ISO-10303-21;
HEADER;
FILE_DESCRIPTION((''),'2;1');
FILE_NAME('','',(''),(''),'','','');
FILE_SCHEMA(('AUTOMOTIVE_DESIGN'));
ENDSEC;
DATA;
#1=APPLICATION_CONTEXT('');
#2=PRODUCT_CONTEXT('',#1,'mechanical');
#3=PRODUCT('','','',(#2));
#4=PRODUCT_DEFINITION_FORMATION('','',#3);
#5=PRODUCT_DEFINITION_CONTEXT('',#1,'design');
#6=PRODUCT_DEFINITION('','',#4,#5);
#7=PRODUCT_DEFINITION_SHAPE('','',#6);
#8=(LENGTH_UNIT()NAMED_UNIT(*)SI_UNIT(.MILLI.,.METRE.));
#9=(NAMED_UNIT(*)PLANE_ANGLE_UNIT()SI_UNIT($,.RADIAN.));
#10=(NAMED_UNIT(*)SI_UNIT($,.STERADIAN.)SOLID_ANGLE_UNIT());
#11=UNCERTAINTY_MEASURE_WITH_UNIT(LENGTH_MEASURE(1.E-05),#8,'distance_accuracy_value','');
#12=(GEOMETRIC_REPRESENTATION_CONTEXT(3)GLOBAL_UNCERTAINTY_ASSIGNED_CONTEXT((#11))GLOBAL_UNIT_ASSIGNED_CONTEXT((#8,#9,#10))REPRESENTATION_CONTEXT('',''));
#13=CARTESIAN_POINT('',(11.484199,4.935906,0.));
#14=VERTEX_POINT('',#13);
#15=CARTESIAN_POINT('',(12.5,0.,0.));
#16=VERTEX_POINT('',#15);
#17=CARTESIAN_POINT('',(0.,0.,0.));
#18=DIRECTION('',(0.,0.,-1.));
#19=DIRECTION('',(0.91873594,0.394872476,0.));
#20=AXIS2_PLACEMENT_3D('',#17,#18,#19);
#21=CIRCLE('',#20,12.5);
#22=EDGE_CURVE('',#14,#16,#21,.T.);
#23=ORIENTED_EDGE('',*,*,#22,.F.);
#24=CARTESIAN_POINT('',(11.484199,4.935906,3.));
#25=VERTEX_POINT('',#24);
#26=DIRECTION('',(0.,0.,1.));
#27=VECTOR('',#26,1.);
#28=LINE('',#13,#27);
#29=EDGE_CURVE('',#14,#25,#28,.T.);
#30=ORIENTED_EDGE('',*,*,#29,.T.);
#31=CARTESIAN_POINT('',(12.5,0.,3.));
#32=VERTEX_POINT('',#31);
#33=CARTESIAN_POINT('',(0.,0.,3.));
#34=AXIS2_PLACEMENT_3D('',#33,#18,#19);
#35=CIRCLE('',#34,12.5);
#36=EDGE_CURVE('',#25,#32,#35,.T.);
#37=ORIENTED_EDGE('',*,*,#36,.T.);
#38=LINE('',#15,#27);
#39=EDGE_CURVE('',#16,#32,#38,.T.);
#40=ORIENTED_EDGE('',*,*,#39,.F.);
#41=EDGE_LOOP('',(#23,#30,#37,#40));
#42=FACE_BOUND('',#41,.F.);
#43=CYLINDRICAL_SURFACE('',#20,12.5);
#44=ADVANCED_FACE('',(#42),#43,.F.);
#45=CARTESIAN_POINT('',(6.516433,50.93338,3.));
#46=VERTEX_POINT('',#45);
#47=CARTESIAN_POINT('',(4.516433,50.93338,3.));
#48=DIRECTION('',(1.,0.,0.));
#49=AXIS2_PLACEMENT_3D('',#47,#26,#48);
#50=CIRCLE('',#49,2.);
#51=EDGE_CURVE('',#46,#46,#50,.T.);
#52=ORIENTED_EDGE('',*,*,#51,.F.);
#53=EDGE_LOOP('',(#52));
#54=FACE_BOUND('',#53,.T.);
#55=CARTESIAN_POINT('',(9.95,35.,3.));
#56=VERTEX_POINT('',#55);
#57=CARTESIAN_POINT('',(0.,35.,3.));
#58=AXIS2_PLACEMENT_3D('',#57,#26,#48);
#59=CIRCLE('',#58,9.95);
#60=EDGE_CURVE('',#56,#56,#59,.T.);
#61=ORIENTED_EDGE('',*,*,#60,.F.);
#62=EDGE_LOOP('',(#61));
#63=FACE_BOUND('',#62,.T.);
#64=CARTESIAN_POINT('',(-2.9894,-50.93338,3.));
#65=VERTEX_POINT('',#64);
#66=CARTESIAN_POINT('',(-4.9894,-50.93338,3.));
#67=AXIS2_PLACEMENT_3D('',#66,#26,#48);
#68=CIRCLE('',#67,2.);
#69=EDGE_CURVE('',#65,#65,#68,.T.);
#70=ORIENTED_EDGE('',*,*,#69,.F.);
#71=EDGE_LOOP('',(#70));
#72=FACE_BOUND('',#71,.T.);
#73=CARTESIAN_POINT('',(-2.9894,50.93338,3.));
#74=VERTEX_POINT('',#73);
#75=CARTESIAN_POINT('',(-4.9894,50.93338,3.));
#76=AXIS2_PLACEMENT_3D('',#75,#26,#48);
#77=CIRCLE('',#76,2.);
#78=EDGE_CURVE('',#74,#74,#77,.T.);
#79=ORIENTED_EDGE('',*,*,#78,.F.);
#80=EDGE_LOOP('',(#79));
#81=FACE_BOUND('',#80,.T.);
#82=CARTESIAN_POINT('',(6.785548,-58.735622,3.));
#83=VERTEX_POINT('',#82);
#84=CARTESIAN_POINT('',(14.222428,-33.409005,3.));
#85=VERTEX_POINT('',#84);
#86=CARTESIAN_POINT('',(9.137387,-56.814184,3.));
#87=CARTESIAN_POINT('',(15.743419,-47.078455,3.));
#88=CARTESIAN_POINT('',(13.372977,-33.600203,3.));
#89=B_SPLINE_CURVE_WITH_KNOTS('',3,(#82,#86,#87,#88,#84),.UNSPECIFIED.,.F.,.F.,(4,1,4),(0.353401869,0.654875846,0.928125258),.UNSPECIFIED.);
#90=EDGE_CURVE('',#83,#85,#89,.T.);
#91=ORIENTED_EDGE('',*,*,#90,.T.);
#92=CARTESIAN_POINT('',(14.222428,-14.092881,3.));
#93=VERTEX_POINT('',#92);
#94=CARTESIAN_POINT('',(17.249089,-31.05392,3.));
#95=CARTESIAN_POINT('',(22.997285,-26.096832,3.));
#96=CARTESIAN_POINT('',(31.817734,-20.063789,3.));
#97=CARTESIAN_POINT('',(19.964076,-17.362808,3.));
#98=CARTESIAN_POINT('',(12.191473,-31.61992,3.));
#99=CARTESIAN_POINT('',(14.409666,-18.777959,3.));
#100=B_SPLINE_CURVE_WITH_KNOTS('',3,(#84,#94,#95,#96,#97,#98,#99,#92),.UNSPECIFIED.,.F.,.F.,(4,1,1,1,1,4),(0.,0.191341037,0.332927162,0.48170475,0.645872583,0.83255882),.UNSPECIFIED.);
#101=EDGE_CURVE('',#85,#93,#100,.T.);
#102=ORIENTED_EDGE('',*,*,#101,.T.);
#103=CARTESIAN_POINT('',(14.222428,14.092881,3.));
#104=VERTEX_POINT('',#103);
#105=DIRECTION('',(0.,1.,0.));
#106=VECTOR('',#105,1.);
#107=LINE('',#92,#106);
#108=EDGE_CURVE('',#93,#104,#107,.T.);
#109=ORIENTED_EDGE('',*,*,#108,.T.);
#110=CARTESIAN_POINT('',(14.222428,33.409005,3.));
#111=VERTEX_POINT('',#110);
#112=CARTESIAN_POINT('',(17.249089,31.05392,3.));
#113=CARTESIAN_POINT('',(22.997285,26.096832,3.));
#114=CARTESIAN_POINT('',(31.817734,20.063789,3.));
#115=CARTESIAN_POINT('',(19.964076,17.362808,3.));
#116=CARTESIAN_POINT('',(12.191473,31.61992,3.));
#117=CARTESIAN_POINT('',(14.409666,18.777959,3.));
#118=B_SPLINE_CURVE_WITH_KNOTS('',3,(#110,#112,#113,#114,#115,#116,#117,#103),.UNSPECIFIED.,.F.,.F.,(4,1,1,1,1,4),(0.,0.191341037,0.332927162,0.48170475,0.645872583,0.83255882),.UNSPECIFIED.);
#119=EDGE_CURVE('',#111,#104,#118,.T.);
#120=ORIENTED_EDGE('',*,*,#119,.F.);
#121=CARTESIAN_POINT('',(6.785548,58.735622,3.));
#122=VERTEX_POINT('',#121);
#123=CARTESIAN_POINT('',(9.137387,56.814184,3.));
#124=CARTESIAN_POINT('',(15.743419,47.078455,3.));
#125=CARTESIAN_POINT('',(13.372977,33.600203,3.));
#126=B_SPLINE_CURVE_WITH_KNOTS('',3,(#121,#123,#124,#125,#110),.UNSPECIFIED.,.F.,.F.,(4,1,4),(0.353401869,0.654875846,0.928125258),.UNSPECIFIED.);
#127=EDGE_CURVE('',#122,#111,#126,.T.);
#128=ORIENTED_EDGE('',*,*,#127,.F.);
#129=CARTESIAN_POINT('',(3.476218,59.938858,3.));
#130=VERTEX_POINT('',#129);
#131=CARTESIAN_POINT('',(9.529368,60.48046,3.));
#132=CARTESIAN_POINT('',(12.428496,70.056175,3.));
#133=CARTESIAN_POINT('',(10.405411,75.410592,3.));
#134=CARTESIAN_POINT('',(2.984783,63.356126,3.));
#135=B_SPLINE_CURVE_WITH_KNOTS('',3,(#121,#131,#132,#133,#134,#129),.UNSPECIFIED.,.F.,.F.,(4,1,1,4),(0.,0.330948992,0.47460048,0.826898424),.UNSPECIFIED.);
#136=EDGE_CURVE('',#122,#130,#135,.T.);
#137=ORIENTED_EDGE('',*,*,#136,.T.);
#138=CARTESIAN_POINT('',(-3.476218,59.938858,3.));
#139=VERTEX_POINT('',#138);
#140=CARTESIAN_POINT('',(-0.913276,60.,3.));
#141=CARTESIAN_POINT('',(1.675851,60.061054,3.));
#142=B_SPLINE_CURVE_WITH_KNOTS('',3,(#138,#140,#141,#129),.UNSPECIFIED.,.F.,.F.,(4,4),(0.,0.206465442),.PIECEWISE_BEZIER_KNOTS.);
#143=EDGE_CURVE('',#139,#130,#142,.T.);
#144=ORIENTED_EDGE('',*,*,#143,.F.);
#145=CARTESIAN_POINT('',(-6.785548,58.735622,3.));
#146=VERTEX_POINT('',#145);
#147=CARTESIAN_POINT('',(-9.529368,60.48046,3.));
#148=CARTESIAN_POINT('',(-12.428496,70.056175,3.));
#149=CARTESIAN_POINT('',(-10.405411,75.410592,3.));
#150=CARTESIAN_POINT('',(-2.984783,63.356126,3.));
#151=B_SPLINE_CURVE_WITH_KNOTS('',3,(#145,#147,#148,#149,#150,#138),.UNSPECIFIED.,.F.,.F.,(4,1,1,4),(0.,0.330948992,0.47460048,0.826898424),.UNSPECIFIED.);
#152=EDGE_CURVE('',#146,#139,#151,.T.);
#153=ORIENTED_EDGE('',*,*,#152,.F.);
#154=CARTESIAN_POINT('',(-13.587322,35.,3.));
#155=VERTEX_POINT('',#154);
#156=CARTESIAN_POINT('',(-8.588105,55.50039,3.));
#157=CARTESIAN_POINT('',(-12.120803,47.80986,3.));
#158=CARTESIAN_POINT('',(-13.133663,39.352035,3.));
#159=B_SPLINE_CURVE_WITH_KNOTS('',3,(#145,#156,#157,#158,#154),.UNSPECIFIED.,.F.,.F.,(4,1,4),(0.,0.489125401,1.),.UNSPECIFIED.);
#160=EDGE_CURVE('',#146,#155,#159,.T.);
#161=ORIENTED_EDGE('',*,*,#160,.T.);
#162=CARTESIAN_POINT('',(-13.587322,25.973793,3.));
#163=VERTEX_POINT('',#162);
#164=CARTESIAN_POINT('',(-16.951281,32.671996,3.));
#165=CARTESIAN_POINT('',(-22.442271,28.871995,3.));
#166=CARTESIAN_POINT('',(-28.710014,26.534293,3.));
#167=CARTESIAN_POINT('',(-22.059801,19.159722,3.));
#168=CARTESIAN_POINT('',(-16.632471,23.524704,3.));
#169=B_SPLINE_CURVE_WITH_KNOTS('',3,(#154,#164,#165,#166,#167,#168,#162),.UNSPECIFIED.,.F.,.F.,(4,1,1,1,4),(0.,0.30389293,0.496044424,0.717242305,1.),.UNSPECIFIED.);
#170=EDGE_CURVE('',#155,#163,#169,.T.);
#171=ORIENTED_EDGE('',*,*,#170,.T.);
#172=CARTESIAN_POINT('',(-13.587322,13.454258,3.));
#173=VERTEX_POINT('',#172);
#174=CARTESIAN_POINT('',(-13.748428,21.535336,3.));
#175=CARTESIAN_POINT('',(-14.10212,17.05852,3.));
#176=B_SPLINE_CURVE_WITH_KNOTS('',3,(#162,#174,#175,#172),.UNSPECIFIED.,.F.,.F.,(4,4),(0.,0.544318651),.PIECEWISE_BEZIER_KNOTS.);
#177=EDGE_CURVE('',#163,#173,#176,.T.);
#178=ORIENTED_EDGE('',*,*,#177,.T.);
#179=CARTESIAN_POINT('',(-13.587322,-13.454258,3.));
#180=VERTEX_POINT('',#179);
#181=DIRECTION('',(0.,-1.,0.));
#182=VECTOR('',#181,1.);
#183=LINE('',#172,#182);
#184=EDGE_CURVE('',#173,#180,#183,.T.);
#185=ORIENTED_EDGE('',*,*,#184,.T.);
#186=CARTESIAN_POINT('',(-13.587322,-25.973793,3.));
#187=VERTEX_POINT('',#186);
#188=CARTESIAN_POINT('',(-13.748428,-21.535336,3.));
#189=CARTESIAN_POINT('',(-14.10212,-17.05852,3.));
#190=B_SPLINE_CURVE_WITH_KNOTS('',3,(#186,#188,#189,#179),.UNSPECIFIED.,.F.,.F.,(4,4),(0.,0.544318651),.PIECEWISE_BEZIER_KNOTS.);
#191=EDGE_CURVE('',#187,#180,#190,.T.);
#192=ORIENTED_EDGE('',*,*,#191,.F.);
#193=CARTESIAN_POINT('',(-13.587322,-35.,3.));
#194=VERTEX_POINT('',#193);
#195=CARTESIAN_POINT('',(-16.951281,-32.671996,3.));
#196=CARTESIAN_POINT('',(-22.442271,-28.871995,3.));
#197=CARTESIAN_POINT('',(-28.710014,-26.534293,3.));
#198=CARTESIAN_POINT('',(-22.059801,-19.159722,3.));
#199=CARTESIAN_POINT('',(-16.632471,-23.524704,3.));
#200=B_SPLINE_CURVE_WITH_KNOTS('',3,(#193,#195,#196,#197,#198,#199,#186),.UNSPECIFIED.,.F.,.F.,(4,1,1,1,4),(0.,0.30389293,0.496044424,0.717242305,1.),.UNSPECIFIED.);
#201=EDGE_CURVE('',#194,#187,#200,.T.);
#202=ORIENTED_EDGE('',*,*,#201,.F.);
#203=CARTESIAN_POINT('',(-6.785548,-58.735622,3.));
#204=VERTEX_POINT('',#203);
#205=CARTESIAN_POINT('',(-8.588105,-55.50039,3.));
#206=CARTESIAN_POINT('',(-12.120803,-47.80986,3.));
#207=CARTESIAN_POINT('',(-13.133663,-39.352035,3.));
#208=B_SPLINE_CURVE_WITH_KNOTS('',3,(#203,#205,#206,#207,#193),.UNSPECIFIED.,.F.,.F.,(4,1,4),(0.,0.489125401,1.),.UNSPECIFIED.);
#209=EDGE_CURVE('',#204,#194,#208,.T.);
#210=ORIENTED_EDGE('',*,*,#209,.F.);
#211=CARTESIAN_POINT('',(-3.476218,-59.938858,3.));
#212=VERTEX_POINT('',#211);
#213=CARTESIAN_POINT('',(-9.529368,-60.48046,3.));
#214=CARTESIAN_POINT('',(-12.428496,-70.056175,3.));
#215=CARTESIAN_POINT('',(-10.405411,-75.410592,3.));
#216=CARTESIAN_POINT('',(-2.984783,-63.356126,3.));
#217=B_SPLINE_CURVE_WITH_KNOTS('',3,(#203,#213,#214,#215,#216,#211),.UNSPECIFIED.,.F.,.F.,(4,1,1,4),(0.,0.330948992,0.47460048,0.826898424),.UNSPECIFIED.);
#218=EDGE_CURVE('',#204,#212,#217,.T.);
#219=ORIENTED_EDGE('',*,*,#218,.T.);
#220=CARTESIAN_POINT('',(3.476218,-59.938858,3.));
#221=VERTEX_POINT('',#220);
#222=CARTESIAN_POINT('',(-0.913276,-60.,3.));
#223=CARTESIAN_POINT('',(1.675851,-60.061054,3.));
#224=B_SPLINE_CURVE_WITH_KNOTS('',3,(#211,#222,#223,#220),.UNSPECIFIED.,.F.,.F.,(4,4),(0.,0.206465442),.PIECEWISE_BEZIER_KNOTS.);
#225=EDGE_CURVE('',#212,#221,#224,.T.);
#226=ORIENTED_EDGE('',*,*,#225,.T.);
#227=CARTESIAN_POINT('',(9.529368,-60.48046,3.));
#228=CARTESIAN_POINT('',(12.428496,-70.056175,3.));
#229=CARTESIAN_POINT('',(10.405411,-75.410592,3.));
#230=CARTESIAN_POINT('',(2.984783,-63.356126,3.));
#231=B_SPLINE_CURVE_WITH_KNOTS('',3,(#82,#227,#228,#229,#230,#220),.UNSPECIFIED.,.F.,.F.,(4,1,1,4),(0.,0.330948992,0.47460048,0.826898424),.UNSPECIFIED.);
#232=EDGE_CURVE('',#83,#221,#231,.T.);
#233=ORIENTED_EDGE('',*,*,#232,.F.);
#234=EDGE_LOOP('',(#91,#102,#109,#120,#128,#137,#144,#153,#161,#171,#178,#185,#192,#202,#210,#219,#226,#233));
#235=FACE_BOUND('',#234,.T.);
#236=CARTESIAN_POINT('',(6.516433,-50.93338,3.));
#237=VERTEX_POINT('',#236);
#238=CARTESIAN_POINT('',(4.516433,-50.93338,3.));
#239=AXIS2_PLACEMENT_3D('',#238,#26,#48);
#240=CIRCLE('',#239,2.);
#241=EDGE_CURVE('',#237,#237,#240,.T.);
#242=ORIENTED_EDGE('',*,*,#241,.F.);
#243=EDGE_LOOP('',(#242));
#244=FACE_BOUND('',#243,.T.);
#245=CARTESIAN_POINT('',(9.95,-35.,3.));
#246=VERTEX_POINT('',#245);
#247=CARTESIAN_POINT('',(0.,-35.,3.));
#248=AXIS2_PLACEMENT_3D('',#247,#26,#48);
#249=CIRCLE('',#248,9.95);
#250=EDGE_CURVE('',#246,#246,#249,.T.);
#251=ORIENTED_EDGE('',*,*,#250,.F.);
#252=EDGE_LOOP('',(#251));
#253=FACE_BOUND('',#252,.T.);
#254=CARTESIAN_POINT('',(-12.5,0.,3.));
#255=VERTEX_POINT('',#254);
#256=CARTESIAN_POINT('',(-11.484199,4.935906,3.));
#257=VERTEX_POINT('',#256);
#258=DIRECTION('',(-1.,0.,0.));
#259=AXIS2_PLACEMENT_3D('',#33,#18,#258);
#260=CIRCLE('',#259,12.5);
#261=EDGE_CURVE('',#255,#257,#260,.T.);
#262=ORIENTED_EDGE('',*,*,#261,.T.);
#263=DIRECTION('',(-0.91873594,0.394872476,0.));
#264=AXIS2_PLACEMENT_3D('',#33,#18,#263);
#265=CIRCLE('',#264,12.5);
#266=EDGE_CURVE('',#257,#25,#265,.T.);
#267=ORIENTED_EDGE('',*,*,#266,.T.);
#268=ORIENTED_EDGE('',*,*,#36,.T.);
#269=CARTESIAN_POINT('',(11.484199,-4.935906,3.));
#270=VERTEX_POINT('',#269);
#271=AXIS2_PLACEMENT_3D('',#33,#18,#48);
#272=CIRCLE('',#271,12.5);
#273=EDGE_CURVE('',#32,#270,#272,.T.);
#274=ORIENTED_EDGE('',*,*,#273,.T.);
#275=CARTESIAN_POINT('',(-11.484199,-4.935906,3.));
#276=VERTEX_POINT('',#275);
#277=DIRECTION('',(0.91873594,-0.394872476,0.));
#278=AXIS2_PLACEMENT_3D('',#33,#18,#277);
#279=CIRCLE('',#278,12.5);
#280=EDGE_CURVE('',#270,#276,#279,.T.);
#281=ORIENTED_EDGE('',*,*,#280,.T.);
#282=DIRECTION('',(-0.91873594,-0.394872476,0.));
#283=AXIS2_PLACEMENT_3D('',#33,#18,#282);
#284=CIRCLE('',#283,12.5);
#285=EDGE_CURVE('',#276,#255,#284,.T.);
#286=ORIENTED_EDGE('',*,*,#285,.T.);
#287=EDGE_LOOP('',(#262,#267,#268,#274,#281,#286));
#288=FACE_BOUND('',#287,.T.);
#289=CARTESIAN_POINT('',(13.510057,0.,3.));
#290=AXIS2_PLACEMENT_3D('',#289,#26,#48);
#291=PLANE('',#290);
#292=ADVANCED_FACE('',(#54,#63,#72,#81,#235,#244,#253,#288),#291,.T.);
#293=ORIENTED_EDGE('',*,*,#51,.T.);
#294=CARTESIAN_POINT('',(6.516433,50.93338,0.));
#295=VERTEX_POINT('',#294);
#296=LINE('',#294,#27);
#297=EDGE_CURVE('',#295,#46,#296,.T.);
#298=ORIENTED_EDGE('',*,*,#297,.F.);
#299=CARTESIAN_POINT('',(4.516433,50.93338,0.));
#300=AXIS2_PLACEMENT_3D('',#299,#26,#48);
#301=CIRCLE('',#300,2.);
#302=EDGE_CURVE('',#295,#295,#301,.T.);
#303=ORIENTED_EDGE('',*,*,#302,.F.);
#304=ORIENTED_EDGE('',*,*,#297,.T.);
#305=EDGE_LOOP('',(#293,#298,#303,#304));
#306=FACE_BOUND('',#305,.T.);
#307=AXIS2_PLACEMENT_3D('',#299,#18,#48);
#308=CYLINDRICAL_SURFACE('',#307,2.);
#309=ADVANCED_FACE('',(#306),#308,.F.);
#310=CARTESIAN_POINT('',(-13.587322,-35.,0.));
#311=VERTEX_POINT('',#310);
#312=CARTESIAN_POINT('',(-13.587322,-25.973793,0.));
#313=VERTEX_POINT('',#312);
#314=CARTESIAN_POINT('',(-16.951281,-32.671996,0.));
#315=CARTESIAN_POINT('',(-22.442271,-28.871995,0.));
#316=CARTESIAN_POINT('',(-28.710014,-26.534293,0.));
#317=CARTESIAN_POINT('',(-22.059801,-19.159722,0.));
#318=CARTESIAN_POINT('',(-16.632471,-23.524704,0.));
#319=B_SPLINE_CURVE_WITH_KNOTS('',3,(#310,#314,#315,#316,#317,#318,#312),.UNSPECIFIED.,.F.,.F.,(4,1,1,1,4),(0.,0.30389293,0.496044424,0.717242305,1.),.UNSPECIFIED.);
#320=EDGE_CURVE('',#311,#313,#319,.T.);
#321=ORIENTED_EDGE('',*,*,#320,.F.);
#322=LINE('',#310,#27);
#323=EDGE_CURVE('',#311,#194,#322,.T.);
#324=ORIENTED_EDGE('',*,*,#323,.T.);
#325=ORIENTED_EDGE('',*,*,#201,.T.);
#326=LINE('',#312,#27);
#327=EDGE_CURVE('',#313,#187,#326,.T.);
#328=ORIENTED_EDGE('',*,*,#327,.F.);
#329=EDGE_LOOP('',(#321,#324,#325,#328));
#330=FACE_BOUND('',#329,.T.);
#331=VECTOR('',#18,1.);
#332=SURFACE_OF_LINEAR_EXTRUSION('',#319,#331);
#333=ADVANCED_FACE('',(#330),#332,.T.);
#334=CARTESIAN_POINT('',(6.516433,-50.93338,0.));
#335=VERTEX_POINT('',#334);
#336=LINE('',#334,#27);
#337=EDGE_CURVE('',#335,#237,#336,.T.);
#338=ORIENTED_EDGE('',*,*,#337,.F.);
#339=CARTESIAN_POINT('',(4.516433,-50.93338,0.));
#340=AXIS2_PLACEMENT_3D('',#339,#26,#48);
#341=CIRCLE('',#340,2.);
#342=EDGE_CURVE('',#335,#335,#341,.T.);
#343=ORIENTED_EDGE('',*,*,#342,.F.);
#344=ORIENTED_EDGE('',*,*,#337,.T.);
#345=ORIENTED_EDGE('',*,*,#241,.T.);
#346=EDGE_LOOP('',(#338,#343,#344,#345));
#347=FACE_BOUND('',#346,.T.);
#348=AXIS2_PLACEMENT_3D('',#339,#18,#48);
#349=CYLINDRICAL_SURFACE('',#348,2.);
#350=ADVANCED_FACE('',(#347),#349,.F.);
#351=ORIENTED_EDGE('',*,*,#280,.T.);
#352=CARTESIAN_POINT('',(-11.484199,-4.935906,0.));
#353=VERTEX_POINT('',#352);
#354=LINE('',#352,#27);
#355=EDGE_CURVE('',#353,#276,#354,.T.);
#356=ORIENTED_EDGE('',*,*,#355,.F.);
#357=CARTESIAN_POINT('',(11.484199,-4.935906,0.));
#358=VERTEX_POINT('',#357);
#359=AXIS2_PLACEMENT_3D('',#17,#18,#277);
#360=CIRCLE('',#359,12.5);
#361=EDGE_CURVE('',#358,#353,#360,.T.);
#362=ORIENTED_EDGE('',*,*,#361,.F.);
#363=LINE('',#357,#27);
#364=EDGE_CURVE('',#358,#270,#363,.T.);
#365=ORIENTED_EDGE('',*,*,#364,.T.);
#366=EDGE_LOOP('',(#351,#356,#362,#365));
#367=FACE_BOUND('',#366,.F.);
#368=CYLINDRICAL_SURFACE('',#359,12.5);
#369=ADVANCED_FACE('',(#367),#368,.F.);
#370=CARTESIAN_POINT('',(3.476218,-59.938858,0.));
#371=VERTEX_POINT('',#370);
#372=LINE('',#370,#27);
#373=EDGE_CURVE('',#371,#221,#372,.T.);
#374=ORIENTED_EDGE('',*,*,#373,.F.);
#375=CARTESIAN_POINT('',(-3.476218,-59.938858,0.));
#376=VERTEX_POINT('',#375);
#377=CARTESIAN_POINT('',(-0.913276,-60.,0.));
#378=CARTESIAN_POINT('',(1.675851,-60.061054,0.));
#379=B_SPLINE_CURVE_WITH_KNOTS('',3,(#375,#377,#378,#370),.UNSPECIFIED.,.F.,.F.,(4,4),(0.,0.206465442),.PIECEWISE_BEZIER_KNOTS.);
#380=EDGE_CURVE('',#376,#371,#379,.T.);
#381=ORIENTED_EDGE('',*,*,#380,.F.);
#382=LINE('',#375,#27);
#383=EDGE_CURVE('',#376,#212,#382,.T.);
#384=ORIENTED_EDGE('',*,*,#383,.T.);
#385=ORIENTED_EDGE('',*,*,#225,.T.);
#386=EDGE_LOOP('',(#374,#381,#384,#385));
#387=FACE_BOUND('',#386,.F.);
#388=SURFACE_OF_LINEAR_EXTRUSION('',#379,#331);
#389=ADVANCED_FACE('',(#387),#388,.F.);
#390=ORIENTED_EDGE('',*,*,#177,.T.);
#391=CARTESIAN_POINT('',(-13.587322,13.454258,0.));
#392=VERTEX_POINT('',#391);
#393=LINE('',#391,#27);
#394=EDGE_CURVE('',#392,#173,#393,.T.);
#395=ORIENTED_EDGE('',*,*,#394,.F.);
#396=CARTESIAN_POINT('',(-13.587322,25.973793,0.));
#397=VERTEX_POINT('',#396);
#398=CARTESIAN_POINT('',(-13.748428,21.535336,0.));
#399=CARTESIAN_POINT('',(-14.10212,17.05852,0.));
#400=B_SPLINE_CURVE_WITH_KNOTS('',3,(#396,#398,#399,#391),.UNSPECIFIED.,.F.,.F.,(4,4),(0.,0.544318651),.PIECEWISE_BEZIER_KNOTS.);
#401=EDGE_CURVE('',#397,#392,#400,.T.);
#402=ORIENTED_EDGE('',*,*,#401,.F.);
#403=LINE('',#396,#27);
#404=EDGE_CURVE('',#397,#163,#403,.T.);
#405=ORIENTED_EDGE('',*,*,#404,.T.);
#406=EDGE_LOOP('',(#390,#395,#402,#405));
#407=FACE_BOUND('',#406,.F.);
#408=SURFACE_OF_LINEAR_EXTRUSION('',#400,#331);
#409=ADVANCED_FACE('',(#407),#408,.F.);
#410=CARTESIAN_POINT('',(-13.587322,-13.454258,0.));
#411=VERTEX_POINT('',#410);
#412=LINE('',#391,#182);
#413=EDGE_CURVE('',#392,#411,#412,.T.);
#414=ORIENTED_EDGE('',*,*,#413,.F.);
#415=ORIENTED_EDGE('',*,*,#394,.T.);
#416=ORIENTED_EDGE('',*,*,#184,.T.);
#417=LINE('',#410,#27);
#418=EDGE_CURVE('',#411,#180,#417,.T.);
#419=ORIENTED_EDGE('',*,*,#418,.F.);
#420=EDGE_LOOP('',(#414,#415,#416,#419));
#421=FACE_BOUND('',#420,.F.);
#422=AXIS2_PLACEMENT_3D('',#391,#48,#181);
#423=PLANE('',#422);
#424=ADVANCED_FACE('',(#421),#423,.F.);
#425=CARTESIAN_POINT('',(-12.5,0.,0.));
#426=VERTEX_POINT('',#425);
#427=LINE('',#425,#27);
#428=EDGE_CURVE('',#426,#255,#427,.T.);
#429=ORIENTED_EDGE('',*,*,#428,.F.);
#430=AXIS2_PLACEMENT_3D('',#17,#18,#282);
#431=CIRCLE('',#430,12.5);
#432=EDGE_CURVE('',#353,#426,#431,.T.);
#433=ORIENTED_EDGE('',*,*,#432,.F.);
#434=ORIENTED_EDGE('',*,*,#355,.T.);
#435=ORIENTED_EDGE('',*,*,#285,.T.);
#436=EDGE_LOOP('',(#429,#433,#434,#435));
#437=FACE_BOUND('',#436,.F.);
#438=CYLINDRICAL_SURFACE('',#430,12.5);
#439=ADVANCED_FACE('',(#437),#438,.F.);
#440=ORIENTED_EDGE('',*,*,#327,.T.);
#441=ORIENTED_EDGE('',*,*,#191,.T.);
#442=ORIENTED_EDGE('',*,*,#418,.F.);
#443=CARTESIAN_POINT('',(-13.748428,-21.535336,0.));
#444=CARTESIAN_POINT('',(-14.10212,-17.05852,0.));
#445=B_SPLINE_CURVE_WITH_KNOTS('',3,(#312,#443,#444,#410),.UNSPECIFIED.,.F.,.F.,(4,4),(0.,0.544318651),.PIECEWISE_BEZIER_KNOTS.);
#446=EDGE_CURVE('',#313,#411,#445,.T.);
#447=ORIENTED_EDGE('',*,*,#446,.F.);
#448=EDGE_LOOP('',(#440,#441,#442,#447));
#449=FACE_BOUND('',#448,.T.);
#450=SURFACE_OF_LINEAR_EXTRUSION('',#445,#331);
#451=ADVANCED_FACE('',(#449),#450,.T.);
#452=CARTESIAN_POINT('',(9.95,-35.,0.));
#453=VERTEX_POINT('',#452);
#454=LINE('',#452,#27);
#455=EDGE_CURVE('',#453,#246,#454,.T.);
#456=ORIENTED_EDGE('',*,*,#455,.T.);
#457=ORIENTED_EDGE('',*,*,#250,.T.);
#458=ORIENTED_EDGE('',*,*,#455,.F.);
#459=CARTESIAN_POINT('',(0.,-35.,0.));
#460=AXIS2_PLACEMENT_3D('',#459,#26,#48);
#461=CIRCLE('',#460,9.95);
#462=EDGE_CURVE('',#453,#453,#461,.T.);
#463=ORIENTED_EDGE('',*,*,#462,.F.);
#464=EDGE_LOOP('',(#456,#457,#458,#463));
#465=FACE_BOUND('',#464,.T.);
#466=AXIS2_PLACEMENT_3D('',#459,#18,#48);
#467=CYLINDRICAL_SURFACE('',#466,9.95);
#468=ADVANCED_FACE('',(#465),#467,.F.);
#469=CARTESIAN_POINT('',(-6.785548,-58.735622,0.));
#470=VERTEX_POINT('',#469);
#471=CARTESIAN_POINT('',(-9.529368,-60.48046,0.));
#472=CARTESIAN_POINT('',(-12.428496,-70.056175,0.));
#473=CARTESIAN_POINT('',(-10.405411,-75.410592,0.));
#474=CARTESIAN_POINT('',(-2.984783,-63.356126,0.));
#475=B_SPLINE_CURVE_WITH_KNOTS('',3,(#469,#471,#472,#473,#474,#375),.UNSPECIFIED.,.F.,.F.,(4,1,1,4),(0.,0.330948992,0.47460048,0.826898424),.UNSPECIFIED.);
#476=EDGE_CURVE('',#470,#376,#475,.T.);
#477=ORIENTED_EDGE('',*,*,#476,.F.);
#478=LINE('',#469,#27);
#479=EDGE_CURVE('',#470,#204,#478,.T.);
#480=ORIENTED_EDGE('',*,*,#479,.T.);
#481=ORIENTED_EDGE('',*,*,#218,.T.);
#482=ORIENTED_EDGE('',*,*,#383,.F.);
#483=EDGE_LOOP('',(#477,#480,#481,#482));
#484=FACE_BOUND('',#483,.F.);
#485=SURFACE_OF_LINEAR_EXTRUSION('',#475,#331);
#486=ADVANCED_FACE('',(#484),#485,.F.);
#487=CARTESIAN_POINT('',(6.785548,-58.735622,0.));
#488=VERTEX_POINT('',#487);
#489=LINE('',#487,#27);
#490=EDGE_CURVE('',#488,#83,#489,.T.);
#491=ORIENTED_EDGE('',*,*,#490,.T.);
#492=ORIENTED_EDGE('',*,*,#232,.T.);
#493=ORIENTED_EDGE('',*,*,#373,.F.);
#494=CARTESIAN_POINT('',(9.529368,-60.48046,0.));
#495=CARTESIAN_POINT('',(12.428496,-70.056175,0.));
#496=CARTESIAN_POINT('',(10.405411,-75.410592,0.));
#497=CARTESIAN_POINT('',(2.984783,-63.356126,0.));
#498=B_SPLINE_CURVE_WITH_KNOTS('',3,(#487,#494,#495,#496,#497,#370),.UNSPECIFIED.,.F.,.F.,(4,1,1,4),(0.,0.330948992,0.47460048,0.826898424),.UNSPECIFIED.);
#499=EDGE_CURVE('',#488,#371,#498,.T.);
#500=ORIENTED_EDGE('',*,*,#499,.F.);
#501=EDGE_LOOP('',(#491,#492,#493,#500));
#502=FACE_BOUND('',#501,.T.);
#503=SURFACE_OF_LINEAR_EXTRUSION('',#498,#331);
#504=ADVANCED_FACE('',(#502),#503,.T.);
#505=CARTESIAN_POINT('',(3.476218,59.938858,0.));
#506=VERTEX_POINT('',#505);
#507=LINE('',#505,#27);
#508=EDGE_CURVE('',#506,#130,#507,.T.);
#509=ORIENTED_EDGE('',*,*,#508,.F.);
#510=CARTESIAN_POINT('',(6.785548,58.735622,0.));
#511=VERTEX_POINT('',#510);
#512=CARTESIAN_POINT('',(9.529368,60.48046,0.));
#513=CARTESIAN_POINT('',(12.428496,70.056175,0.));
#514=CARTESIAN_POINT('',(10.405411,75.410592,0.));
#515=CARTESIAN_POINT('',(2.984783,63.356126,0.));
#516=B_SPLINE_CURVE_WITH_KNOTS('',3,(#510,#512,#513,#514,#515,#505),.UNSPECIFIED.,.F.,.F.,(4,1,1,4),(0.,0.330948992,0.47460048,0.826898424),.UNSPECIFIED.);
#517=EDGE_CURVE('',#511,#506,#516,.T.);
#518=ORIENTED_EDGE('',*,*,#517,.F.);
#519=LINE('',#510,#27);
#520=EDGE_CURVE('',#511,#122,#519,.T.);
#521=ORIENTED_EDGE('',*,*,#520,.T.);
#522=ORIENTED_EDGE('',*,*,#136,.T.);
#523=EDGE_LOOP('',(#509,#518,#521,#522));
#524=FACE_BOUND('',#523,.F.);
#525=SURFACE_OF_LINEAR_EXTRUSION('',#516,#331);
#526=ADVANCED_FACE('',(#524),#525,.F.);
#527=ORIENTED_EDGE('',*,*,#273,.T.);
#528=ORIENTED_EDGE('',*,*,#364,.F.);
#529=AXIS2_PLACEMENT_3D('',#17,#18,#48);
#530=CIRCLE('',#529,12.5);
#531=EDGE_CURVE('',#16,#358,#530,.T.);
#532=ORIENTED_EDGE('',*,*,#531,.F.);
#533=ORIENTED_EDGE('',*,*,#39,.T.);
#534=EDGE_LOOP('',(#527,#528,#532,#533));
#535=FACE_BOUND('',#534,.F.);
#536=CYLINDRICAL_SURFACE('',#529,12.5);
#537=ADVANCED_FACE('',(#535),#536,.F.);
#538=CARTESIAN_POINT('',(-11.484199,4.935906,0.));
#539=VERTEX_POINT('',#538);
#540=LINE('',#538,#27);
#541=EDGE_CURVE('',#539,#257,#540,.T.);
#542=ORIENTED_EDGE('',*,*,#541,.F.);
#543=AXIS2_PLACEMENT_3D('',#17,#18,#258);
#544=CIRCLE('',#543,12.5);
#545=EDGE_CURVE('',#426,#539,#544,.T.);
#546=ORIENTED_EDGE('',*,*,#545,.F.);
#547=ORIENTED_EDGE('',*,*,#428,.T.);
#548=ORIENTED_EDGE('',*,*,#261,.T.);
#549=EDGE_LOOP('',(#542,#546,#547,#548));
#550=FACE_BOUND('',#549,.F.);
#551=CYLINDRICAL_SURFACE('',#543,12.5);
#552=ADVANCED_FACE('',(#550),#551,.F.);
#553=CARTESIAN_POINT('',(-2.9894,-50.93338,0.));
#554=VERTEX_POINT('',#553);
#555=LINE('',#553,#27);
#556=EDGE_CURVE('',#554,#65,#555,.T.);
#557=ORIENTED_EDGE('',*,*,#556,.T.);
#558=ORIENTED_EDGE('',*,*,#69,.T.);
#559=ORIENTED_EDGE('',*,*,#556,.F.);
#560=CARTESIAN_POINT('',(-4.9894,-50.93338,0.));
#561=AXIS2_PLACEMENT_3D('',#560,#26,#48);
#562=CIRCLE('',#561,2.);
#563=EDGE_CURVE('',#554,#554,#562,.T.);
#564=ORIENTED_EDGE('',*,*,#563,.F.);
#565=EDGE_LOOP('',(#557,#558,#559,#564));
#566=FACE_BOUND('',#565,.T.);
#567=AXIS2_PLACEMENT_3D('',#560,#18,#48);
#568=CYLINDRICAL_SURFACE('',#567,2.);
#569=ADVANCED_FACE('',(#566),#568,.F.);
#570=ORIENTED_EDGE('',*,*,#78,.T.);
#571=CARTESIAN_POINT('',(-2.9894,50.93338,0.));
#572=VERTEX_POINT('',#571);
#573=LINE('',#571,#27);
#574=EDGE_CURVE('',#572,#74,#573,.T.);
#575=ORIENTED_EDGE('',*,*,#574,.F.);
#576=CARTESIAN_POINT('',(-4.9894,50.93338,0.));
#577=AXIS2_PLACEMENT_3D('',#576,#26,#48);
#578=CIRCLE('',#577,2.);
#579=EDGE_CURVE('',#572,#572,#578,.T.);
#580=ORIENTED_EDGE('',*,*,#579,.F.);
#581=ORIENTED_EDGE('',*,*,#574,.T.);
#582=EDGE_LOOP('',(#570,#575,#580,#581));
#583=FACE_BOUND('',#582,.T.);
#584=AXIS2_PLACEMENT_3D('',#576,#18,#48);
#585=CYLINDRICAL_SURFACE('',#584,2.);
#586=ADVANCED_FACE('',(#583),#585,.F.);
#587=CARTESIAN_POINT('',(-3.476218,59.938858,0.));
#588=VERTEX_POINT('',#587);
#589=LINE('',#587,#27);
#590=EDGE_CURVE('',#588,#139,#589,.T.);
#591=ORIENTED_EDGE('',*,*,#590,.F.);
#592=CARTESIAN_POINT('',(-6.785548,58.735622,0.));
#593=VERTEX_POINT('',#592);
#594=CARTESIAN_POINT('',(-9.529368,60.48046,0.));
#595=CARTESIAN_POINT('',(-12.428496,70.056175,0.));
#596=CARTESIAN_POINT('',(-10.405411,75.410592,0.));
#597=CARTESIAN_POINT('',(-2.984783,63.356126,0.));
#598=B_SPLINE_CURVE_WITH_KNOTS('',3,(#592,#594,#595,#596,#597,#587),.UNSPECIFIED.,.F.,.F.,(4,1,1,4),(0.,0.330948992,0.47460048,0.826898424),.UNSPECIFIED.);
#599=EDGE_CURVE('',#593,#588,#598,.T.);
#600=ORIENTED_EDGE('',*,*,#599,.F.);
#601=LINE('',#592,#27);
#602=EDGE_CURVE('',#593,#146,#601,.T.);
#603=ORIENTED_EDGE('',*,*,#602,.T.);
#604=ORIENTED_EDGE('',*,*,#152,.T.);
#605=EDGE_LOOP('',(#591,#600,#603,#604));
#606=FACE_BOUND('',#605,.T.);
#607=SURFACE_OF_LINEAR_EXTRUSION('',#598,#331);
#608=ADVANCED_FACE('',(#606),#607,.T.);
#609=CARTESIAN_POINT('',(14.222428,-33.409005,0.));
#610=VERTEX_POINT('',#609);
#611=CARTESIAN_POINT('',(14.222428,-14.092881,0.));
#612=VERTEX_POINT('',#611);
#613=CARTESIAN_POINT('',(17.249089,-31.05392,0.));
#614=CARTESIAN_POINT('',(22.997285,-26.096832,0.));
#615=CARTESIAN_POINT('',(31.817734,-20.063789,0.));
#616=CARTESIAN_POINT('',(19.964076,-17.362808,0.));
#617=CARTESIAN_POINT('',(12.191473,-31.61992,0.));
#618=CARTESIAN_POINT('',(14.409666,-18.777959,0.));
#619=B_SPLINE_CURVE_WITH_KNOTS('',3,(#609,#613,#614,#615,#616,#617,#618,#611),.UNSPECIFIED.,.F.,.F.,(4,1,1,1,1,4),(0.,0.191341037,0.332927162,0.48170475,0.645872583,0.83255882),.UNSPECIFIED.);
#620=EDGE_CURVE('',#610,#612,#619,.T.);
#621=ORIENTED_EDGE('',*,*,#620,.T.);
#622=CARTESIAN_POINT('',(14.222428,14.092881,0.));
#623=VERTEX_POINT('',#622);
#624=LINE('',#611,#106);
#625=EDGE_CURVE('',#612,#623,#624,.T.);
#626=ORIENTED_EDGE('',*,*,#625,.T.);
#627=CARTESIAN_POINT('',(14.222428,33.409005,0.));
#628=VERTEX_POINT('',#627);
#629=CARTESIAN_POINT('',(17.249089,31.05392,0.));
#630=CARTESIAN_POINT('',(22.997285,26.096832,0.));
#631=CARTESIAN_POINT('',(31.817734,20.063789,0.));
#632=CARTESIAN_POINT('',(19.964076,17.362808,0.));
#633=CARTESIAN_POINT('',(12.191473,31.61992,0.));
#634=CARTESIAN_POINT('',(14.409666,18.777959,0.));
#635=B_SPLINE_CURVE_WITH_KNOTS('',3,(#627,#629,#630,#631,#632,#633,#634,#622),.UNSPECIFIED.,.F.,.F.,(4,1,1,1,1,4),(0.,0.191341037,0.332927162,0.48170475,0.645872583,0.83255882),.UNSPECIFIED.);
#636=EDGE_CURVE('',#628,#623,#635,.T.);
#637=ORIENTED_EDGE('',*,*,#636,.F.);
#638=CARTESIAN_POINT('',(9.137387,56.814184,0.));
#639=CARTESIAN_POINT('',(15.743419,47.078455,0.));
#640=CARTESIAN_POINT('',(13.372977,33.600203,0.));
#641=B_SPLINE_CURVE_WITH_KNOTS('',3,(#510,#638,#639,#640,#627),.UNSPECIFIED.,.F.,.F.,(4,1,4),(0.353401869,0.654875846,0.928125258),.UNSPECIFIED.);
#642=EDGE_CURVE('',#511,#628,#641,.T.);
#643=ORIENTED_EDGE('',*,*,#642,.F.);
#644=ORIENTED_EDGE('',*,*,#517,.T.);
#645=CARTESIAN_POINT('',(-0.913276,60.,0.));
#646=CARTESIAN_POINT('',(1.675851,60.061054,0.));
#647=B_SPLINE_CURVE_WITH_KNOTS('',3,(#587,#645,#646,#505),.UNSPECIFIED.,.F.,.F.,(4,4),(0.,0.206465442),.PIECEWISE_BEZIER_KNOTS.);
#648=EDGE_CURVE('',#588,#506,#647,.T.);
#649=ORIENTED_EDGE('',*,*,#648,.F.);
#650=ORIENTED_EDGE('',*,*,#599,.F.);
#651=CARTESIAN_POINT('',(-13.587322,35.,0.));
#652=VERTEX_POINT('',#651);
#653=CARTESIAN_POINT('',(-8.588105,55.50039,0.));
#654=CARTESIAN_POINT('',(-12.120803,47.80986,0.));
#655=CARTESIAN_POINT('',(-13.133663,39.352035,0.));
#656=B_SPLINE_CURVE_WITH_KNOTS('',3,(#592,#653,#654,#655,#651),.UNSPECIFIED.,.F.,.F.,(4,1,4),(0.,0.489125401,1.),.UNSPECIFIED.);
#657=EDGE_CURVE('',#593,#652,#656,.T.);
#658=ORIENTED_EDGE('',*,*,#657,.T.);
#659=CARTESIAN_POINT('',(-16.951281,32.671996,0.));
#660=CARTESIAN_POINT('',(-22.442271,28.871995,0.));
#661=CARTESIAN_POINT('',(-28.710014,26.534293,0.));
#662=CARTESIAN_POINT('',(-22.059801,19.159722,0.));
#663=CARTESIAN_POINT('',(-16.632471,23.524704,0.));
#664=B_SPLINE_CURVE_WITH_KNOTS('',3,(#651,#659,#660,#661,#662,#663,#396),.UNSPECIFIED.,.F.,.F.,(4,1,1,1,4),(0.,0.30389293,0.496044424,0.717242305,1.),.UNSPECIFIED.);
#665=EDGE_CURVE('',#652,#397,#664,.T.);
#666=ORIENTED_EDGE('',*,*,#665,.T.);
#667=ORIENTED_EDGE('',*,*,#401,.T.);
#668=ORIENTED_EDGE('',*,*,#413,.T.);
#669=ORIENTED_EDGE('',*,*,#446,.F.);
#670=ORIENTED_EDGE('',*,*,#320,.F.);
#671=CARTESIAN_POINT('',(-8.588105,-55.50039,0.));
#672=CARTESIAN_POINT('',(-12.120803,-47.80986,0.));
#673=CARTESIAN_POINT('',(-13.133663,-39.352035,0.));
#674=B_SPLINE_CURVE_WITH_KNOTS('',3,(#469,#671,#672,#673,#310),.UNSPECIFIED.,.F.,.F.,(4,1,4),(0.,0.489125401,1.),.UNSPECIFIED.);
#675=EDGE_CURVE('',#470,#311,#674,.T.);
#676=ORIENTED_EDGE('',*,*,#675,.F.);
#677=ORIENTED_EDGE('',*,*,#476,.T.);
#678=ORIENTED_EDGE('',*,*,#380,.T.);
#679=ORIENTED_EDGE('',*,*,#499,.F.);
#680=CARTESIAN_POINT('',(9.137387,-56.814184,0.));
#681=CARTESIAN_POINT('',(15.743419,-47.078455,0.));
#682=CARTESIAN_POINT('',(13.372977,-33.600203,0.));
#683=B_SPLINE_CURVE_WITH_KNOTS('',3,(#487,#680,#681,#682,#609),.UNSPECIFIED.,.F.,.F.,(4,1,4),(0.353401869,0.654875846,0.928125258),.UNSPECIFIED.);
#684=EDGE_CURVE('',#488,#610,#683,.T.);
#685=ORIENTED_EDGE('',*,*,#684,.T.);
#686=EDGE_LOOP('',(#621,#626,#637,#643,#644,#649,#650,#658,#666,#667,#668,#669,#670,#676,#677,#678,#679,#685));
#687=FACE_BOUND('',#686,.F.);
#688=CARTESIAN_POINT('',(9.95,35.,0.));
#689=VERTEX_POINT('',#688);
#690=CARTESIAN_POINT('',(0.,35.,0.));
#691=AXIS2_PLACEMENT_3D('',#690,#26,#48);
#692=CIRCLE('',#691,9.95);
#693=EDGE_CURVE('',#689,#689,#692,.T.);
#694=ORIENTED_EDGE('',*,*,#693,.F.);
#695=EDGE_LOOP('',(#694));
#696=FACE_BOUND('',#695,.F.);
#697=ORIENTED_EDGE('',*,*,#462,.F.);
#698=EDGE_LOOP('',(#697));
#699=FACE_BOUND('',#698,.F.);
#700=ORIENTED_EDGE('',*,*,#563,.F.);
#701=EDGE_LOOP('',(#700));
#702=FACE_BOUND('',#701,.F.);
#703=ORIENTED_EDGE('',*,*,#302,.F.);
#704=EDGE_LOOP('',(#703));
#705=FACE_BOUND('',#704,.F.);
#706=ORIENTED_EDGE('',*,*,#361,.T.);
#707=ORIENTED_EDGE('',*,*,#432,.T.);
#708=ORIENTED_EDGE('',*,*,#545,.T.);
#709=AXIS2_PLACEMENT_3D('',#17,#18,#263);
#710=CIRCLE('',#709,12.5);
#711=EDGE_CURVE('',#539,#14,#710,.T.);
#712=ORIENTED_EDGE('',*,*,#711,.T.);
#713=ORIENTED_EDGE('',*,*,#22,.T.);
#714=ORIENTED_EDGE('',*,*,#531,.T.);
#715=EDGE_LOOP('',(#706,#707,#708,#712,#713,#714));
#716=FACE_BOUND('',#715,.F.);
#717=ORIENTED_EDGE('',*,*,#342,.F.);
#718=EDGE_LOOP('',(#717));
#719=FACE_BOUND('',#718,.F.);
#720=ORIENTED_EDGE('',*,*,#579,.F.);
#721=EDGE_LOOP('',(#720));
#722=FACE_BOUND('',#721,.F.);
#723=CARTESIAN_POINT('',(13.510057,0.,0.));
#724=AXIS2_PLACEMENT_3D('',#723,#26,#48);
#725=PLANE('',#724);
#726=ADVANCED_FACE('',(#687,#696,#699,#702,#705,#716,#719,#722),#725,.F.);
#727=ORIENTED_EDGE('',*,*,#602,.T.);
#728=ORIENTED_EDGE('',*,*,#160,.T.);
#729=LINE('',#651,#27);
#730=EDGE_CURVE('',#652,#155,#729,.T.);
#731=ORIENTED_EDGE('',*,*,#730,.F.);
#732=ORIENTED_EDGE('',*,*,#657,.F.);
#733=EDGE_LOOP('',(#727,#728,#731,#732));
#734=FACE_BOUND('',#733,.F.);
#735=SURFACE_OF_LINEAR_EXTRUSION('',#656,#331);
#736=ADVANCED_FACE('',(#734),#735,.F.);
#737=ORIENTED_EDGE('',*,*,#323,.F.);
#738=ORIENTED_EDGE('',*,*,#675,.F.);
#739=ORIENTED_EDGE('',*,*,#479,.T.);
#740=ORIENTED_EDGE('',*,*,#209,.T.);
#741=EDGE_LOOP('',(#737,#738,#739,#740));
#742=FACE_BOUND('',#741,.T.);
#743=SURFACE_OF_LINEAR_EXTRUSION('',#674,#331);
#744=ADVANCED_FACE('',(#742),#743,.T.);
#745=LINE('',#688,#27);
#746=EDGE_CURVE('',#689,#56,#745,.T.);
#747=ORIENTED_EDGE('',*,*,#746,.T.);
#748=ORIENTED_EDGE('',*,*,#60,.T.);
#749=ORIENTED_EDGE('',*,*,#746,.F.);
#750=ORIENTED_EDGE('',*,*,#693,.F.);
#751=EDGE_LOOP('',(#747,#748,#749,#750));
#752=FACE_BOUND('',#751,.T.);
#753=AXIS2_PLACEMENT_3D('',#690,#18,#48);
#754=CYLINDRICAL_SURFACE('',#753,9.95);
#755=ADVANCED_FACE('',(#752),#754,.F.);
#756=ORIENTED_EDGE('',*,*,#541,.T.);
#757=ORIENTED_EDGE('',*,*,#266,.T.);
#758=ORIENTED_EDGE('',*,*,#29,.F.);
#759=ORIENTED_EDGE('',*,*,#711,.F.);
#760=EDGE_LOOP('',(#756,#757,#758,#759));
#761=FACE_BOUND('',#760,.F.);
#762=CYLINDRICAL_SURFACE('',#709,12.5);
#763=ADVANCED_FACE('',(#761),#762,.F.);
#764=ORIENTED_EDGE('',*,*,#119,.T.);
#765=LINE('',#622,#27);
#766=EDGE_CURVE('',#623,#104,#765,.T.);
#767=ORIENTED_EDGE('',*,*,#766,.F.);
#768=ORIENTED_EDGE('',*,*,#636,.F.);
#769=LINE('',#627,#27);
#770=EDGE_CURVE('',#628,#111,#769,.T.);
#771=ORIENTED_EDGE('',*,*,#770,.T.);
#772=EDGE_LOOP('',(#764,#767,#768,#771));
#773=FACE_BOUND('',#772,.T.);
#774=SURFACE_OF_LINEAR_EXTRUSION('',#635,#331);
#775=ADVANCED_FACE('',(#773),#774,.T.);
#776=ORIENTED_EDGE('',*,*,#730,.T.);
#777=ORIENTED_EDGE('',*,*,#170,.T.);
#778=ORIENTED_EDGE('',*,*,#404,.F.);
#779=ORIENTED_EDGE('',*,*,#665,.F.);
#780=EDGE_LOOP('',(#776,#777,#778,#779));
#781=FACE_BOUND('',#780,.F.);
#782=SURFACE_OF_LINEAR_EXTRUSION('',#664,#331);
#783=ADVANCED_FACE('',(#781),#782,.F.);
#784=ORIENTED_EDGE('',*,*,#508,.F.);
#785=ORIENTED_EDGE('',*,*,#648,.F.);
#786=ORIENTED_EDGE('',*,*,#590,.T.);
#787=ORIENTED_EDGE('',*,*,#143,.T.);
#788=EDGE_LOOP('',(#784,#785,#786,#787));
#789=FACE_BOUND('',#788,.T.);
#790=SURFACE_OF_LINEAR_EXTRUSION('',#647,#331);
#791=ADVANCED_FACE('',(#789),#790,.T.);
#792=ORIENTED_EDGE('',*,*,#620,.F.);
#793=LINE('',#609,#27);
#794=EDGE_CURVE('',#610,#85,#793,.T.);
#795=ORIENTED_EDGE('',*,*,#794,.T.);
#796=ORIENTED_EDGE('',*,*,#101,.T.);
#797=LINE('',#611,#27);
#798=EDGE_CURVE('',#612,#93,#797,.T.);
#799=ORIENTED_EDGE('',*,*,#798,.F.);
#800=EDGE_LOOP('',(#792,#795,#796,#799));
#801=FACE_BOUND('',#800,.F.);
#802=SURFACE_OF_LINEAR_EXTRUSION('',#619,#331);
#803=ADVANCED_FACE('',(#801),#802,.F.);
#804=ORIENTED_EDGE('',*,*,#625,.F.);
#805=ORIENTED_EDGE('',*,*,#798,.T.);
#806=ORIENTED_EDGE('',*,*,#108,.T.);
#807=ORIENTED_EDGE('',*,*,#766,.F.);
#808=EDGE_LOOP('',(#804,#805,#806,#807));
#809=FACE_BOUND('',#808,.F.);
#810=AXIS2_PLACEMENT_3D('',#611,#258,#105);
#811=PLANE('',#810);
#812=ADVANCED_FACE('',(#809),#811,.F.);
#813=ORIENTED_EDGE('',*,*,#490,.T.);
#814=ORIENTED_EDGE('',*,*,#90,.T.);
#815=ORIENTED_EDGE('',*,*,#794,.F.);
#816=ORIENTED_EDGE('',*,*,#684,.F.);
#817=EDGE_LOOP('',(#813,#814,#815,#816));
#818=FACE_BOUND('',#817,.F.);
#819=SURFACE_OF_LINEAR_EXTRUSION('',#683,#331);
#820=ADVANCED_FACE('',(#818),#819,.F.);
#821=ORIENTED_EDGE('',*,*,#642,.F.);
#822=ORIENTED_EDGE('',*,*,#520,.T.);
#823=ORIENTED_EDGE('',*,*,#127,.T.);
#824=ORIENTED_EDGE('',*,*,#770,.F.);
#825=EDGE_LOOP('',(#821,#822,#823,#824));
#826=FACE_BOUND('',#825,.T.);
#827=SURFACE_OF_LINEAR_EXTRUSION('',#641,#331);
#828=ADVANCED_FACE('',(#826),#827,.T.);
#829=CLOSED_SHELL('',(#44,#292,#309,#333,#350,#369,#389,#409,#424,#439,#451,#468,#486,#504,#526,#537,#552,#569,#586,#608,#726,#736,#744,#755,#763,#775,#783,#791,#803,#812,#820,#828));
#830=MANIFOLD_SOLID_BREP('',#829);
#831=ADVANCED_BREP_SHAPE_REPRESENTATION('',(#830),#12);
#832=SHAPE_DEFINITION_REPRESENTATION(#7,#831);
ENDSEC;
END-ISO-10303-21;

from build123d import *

# Parameters (mm, degrees)
F0_R     = 9.95
F0_R_2   = 2
F1_DEPTH = 3


with BuildPart() as f1:
    # F0 (on Top) → F1 (new body)
    with BuildSketch(Plane.XY):
        with BuildLine():
            ThreePointArc((11.4841992525, 4.9359059482), (12.2434164075, 2.5196735249), (12.5, 0))
            ThreePointArc((12.5, 0), (12.2434164075, -2.5196735249), (11.4841992525, -4.9359059482))
            add(Edge.make_bspline(
                [(14.2224282026, -14.0928809608), (14.0544920655, -9.8907769593), (12.786453361, -7.4166448155), (11.4841992525, -4.9359059482)],
                knots=[0.8325588202, 0.8325588202, 0.8325588202, 0.8325588202, 1, 1, 1, 1], degree=3))
            Line((14.2224282026, -14.0928809608), (14.2224282026, 14.0928809608))
            add(Edge.make_bspline(
                [(14.2224282026, 14.0928809608), (14.0544920655, 9.8907769593), (12.786453361, 7.4166448155), (11.4841992525, 4.9359059482)],
                knots=[0.8325588202, 0.8325588202, 0.8325588202, 0.8325588202, 1, 1, 1, 1], degree=3))
        make_face()
        with BuildLine():
            ThreePointArc((-11.4841992525, 4.9359059482), (0, 12.5), (11.4841992525, 4.9359059482))
            add(Edge.make_bspline(
                [(14.2224282026, 14.0928809608), (14.0544920655, 9.8907769593), (12.786453361, 7.4166448155), (11.4841992525, 4.9359059482)],
                knots=[0.8325588202, 0.8325588202, 0.8325588202, 0.8325588202, 1, 1, 1, 1], degree=3))
            add(Edge.make_bspline(
                [(14.2224282026, 33.4090046103), (17.2490888751, 31.053920445), (22.9972849489, 26.096831604), (31.8177344645, 20.0637888806), (19.9640756328, 17.3628075785), (12.1914727142, 31.6199203566), (14.4096662851, 18.7779589277), (14.2224282026, 14.0928809608)],
                knots=[0, 0, 0, 0, 0.1913410371, 0.3329271624, 0.4817047499, 0.6458725835, 0.8325588202, 0.8325588202, 0.8325588202, 0.8325588202], degree=3))
            add(Edge.make_bspline(
                [(6.7855482785, 58.7356220744), (9.1373873892, 56.8141843385), (15.7434191997, 47.0784545997), (13.3729768574, 33.6002030956), (14.2224282026, 33.4090046103)],
                knots=[0.3534018687, 0.3534018687, 0.3534018687, 0.3534018687, 0.6548758459, 0.9281252581, 0.9281252581, 0.9281252581, 0.9281252581], degree=3))
            add(Edge.make_bspline(
                [(3.4762175574, 59.9388580104), (3.7176838971, 58.2597836406), (5.3504042624, 57.8229914395), (6.7855482785, 58.7356220744)],
                knots=[0.8268984236, 0.8268984236, 0.8268984236, 0.8268984236, 1, 1, 1, 1], degree=3))
            add(Edge.make_bspline(
                [(-3.4762175574, 59.9388580104), (-0.9132762133, 60), (1.6758513881, 60.0610536656), (3.4762175574, 59.9388580104)],
                knots=[0, 0, 0, 0, 0.2064654422, 0.2064654422, 0.2064654422, 0.2064654422], degree=3))
            add(Edge.make_bspline(
                [(-3.4762175574, 59.9388580104), (-3.7176838971, 58.2597836406), (-5.3504042624, 57.8229914395), (-6.7855482785, 58.7356220744)],
                knots=[0.8268984236, 0.8268984236, 0.8268984236, 0.8268984236, 1, 1, 1, 1], degree=3))
            add(Edge.make_bspline(
                [(-6.7855482785, 58.7356220744), (-8.5881051608, 55.5003900744), (-12.1208026299, 47.809859872), (-13.1336634583, 39.352034704), (-13.5873220861, 35)],
                knots=[0, 0, 0, 0, 0.4891254011, 1, 1, 1, 1], degree=3))
            add(Edge.make_bspline(
                [(-13.5873220861, 35), (-16.9512808708, 32.6719958826), (-22.4422707428, 28.8719947978), (-28.7100144619, 26.5342926433), (-22.0598012934, 19.1597220145), (-16.6324705303, 23.5247038367), (-13.5873220861, 25.9737931192)],
                knots=[0, 0, 0, 0, 0.3038929296, 0.4960444243, 0.7172423049, 1, 1, 1, 1], degree=3))
            add(Edge.make_bspline(
                [(-13.5873220861, 25.9737931192), (-13.7484282726, 21.5353356165), (-14.1021202558, 17.0585195355), (-13.5873220861, 13.4542575106)],
                knots=[0, 0, 0, 0, 0.544318651, 0.544318651, 0.544318651, 0.544318651], degree=3))
            add(Edge.make_bspline(
                [(-13.5873220861, 13.4542575106), (-13.1563540785, 10.436916512), (-12.116717364, 8.0310923479), (-11.4841992525, 4.9359059482)],
                knots=[0.544318651, 0.544318651, 0.544318651, 0.544318651, 1, 1, 1, 1], degree=3))
        make_face()
        with Locations((0, 35)):
            Circle(F0_R, mode=Mode.SUBTRACT)
        with Locations((-4.9894000404, 50.9333796799)):
            Circle(F0_R_2, mode=Mode.SUBTRACT)
        with Locations((4.5164329931, 50.9333796799)):
            Circle(F0_R_2, mode=Mode.SUBTRACT)
        with BuildLine():
            add(Edge.make_bspline(
                [(14.2224282026, -14.0928809608), (14.0544920655, -9.8907769593), (12.786453361, -7.4166448155), (11.4841992525, -4.9359059482)],
                knots=[0.8325588202, 0.8325588202, 0.8325588202, 0.8325588202, 1, 1, 1, 1], degree=3))
            ThreePointArc((11.4841992525, -4.9359059482), (0, -12.5), (-11.4841992525, -4.9359059482))
            add(Edge.make_bspline(
                [(-13.5873220861, -13.4542575106), (-13.1563540785, -10.436916512), (-12.116717364, -8.0310923479), (-11.4841992525, -4.9359059482)],
                knots=[0.544318651, 0.544318651, 0.544318651, 0.544318651, 1, 1, 1, 1], degree=3))
            add(Edge.make_bspline(
                [(-13.5873220861, -25.9737931192), (-13.7484282726, -21.5353356165), (-14.1021202558, -17.0585195355), (-13.5873220861, -13.4542575106)],
                knots=[0, 0, 0, 0, 0.544318651, 0.544318651, 0.544318651, 0.544318651], degree=3))
            add(Edge.make_bspline(
                [(-13.5873220861, -35), (-16.9512808708, -32.6719958826), (-22.4422707428, -28.8719947978), (-28.7100144619, -26.5342926433), (-22.0598012934, -19.1597220145), (-16.6324705303, -23.5247038367), (-13.5873220861, -25.9737931192)],
                knots=[0, 0, 0, 0, 0.3038929296, 0.4960444243, 0.7172423049, 1, 1, 1, 1], degree=3))
            add(Edge.make_bspline(
                [(-6.7855482785, -58.7356220744), (-8.5881051608, -55.5003900744), (-12.1208026299, -47.809859872), (-13.1336634583, -39.352034704), (-13.5873220861, -35)],
                knots=[0, 0, 0, 0, 0.4891254011, 1, 1, 1, 1], degree=3))
            add(Edge.make_bspline(
                [(-3.4762175574, -59.9388580104), (-3.7176838971, -58.2597836406), (-5.3504042624, -57.8229914395), (-6.7855482785, -58.7356220744)],
                knots=[0.8268984236, 0.8268984236, 0.8268984236, 0.8268984236, 1, 1, 1, 1], degree=3))
            add(Edge.make_bspline(
                [(-3.4762175574, -59.9388580104), (-0.9132762133, -60), (1.6758513881, -60.0610536656), (3.4762175574, -59.9388580104)],
                knots=[0, 0, 0, 0, 0.2064654422, 0.2064654422, 0.2064654422, 0.2064654422], degree=3))
            add(Edge.make_bspline(
                [(3.4762175574, -59.9388580104), (3.7176838971, -58.2597836406), (5.3504042624, -57.8229914395), (6.7855482785, -58.7356220744)],
                knots=[0.8268984236, 0.8268984236, 0.8268984236, 0.8268984236, 1, 1, 1, 1], degree=3))
            add(Edge.make_bspline(
                [(6.7855482785, -58.7356220744), (9.1373873892, -56.8141843385), (15.7434191997, -47.0784545997), (13.3729768574, -33.6002030956), (14.2224282026, -33.4090046103)],
                knots=[0.3534018687, 0.3534018687, 0.3534018687, 0.3534018687, 0.6548758459, 0.9281252581, 0.9281252581, 0.9281252581, 0.9281252581], degree=3))
            add(Edge.make_bspline(
                [(14.2224282026, -33.4090046103), (17.2490888751, -31.053920445), (22.9972849489, -26.096831604), (31.8177344645, -20.0637888806), (19.9640756328, -17.3628075785), (12.1914727142, -31.6199203566), (14.4096662851, -18.7779589277), (14.2224282026, -14.0928809608)],
                knots=[0, 0, 0, 0, 0.1913410371, 0.3329271624, 0.4817047499, 0.6458725835, 0.8325588202, 0.8325588202, 0.8325588202, 0.8325588202], degree=3))
        make_face()
        with Locations((-4.9894000404, -50.9333796799)):
            Circle(F0_R_2, mode=Mode.SUBTRACT)
        with Locations((0, -35)):
            Circle(F0_R, mode=Mode.SUBTRACT)
        with Locations((4.5164329931, -50.9333796799)):
            Circle(F0_R_2, mode=Mode.SUBTRACT)
        with BuildLine():
            ThreePointArc((-12.5, 0), (-12.2434164075, 2.5196735249), (-11.4841992525, 4.9359059482))
            add(Edge.make_bspline(
                [(-13.5873220861, 13.4542575106), (-13.1563540785, 10.436916512), (-12.116717364, 8.0310923479), (-11.4841992525, 4.9359059482)],
                knots=[0.544318651, 0.544318651, 0.544318651, 0.544318651, 1, 1, 1, 1], degree=3))
            Line((-13.5873220861, 13.4542575106), (-13.5873220861, -13.4542575106))
            add(Edge.make_bspline(
                [(-13.5873220861, -13.4542575106), (-13.1563540785, -10.436916512), (-12.116717364, -8.0310923479), (-11.4841992525, -4.9359059482)],
                knots=[0.544318651, 0.544318651, 0.544318651, 0.544318651, 1, 1, 1, 1], degree=3))
            ThreePointArc((-11.4841992525, -4.9359059482), (-12.2434164075, -2.5196735249), (-12.5, 0))
        make_face()
        with BuildLine():
            add(Edge.make_bspline(
                [(3.4762175574, 59.9388580104), (4.75749431, 59.8518943387), (5.6392774199, 59.6721181439), (6.7855482785, 58.7356220744)],
                knots=[0.2064654422, 0.2064654422, 0.2064654422, 0.2064654422, 0.3534018687, 0.3534018687, 0.3534018687, 0.3534018687], degree=3))
            add(Edge.make_bspline(
                [(6.7855482785, 58.7356220744), (9.5293676869, 60.4804599584), (12.4284956458, 70.0561754003), (10.4054106349, 75.4105917089), (2.9847830091, 63.356125839), (3.4762175574, 59.9388580104)],
                knots=[0, 0, 0, 0, 0.3309489915, 0.4746004798, 0.8268984236, 0.8268984236, 0.8268984236, 0.8268984236], degree=3))
        make_face()
        with BuildLine():
            add(Edge.make_bspline(
                [(3.4762175574, 59.9388580104), (3.7176838971, 58.2597836406), (5.3504042624, 57.8229914395), (6.7855482785, 58.7356220744)],
                knots=[0.8268984236, 0.8268984236, 0.8268984236, 0.8268984236, 1, 1, 1, 1], degree=3))
            add(Edge.make_bspline(
                [(3.4762175574, 59.9388580104), (4.75749431, 59.8518943387), (5.6392774199, 59.6721181439), (6.7855482785, 58.7356220744)],
                knots=[0.2064654422, 0.2064654422, 0.2064654422, 0.2064654422, 0.3534018687, 0.3534018687, 0.3534018687, 0.3534018687], degree=3))
        make_face()
        with BuildLine():
            add(Edge.make_bspline(
                [(6.7855482785, -58.7356220744), (9.5293676869, -60.4804599584), (12.4284956458, -70.0561754003), (10.4054106349, -75.4105917089), (2.9847830091, -63.356125839), (3.4762175574, -59.9388580104)],
                knots=[0, 0, 0, 0, 0.3309489915, 0.4746004798, 0.8268984236, 0.8268984236, 0.8268984236, 0.8268984236], degree=3))
            add(Edge.make_bspline(
                [(3.4762175574, -59.9388580104), (4.75749431, -59.8518943387), (5.6392774199, -59.6721181439), (6.7855482785, -58.7356220744)],
                knots=[0.2064654422, 0.2064654422, 0.2064654422, 0.2064654422, 0.3534018687, 0.3534018687, 0.3534018687, 0.3534018687], degree=3))
        make_face()
        with BuildLine():
            add(Edge.make_bspline(
                [(3.4762175574, -59.9388580104), (4.75749431, -59.8518943387), (5.6392774199, -59.6721181439), (6.7855482785, -58.7356220744)],
                knots=[0.2064654422, 0.2064654422, 0.2064654422, 0.2064654422, 0.3534018687, 0.3534018687, 0.3534018687, 0.3534018687], degree=3))
            add(Edge.make_bspline(
                [(3.4762175574, -59.9388580104), (3.7176838971, -58.2597836406), (5.3504042624, -57.8229914395), (6.7855482785, -58.7356220744)],
                knots=[0.8268984236, 0.8268984236, 0.8268984236, 0.8268984236, 1, 1, 1, 1], degree=3))
        make_face()
        with BuildLine():
            add(Edge.make_bspline(
                [(-6.7855482785, 58.7356220744), (-9.5293676869, 60.4804599584), (-12.4284956458, 70.0561754003), (-10.4054106349, 75.4105917089), (-2.9847830091, 63.356125839), (-3.4762175574, 59.9388580104)],
                knots=[0, 0, 0, 0, 0.3309489915, 0.4746004798, 0.8268984236, 0.8268984236, 0.8268984236, 0.8268984236], degree=3))
            add(Edge.make_bspline(
                [(-3.4762175574, 59.9388580104), (-3.7176838971, 58.2597836406), (-5.3504042624, 57.8229914395), (-6.7855482785, 58.7356220744)],
                knots=[0.8268984236, 0.8268984236, 0.8268984236, 0.8268984236, 1, 1, 1, 1], degree=3))
        make_face()
        with BuildLine():
            add(Edge.make_bspline(
                [(-6.7855482785, -58.7356220744), (-9.5293676869, -60.4804599584), (-12.4284956458, -70.0561754003), (-10.4054106349, -75.4105917089), (-2.9847830091, -63.356125839), (-3.4762175574, -59.9388580104)],
                knots=[0, 0, 0, 0, 0.3309489915, 0.4746004798, 0.8268984236, 0.8268984236, 0.8268984236, 0.8268984236], degree=3))
            add(Edge.make_bspline(
                [(-3.4762175574, -59.9388580104), (-3.7176838971, -58.2597836406), (-5.3504042624, -57.8229914395), (-6.7855482785, -58.7356220744)],
                knots=[0.8268984236, 0.8268984236, 0.8268984236, 0.8268984236, 1, 1, 1, 1], degree=3))
        make_face()
    extrude(amount=F1_DEPTH)


solid = f1.part
